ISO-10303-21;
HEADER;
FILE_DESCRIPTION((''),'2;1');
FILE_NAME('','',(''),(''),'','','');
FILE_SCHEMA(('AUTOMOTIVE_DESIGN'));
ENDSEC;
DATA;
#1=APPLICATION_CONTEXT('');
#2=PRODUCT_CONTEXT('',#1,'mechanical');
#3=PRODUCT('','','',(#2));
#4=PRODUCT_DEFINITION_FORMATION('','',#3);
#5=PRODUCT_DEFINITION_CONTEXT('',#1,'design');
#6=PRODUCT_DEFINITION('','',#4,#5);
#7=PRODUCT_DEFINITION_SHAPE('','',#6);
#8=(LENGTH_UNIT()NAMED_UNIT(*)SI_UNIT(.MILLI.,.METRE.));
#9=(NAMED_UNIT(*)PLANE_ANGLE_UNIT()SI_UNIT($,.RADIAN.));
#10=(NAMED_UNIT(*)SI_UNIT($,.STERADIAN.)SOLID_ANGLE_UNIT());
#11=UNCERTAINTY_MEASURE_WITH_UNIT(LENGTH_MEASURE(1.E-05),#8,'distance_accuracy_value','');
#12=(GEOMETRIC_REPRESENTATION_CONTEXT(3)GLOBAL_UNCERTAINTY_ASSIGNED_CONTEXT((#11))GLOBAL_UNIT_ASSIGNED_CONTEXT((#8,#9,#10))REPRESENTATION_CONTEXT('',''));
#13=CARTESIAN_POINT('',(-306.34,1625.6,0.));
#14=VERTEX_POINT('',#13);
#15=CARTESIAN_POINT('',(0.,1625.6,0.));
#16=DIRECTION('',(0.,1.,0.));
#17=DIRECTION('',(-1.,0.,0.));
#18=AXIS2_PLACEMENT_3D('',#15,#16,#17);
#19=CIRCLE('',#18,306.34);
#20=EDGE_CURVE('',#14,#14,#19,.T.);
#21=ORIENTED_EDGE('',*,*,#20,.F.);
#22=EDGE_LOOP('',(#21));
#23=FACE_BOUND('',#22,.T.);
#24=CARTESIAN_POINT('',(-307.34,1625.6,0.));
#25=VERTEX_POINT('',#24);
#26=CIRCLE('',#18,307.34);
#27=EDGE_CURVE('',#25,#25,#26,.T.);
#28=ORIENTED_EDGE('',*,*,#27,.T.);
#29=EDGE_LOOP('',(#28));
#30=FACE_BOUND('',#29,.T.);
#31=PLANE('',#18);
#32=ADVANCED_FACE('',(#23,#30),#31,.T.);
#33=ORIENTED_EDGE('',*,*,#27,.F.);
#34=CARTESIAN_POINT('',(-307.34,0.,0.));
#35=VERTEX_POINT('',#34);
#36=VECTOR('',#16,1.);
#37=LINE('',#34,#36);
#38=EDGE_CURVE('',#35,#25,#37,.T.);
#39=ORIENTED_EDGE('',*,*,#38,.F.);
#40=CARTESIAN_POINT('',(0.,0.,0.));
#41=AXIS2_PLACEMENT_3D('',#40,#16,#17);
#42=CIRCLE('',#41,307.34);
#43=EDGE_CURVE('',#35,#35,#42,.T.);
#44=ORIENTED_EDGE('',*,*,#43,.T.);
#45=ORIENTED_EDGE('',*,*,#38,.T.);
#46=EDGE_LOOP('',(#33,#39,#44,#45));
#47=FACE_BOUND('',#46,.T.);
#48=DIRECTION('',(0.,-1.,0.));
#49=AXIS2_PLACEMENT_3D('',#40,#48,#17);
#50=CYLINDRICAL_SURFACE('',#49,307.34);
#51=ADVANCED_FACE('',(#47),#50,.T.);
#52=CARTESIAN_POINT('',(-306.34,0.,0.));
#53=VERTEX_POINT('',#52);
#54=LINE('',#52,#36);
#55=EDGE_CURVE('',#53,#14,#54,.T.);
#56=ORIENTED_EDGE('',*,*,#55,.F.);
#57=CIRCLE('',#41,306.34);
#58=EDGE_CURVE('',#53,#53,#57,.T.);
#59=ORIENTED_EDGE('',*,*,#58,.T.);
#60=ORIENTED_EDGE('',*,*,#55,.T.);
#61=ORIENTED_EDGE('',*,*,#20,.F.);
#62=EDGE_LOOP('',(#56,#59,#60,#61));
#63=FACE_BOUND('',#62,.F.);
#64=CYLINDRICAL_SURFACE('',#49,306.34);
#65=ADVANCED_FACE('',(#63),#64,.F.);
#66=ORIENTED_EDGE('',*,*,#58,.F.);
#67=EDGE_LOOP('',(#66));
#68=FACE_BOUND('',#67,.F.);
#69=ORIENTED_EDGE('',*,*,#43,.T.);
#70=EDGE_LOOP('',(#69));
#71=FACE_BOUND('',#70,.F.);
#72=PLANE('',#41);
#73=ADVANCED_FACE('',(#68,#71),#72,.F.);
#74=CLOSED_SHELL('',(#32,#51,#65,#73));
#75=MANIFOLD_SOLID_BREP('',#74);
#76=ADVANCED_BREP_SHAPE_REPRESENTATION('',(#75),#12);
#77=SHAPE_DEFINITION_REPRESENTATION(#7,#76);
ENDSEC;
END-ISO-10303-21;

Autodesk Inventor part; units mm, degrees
ref_plane "YZ Plane" through (0, 0, 0) normal (1, 0, 0) x (0, 1, 0)
ref_plane "XZ Plane" through (0, 0, 0) normal (0, 1, 0) x (-1, 0, 0)
ref_plane "XY Plane" through (0, 0, 0) normal (0, 0, 1) x (1, 0, 0)
sketch "Sketch1" plane through (0, 0, 0) normal (0, 1, 0) x (-1, 0, 0)
  circle A0 centre (0, 0) radius 307.34
  circle A1 centre (0, 0) radius 306.34
  dimension "d0" = 614.68
  dimension "d2" = 612.68
extrude "Extrusion1" add sketch "Sketch1" along normal blind 1625.6
properties part number "EDM Middle shield"
